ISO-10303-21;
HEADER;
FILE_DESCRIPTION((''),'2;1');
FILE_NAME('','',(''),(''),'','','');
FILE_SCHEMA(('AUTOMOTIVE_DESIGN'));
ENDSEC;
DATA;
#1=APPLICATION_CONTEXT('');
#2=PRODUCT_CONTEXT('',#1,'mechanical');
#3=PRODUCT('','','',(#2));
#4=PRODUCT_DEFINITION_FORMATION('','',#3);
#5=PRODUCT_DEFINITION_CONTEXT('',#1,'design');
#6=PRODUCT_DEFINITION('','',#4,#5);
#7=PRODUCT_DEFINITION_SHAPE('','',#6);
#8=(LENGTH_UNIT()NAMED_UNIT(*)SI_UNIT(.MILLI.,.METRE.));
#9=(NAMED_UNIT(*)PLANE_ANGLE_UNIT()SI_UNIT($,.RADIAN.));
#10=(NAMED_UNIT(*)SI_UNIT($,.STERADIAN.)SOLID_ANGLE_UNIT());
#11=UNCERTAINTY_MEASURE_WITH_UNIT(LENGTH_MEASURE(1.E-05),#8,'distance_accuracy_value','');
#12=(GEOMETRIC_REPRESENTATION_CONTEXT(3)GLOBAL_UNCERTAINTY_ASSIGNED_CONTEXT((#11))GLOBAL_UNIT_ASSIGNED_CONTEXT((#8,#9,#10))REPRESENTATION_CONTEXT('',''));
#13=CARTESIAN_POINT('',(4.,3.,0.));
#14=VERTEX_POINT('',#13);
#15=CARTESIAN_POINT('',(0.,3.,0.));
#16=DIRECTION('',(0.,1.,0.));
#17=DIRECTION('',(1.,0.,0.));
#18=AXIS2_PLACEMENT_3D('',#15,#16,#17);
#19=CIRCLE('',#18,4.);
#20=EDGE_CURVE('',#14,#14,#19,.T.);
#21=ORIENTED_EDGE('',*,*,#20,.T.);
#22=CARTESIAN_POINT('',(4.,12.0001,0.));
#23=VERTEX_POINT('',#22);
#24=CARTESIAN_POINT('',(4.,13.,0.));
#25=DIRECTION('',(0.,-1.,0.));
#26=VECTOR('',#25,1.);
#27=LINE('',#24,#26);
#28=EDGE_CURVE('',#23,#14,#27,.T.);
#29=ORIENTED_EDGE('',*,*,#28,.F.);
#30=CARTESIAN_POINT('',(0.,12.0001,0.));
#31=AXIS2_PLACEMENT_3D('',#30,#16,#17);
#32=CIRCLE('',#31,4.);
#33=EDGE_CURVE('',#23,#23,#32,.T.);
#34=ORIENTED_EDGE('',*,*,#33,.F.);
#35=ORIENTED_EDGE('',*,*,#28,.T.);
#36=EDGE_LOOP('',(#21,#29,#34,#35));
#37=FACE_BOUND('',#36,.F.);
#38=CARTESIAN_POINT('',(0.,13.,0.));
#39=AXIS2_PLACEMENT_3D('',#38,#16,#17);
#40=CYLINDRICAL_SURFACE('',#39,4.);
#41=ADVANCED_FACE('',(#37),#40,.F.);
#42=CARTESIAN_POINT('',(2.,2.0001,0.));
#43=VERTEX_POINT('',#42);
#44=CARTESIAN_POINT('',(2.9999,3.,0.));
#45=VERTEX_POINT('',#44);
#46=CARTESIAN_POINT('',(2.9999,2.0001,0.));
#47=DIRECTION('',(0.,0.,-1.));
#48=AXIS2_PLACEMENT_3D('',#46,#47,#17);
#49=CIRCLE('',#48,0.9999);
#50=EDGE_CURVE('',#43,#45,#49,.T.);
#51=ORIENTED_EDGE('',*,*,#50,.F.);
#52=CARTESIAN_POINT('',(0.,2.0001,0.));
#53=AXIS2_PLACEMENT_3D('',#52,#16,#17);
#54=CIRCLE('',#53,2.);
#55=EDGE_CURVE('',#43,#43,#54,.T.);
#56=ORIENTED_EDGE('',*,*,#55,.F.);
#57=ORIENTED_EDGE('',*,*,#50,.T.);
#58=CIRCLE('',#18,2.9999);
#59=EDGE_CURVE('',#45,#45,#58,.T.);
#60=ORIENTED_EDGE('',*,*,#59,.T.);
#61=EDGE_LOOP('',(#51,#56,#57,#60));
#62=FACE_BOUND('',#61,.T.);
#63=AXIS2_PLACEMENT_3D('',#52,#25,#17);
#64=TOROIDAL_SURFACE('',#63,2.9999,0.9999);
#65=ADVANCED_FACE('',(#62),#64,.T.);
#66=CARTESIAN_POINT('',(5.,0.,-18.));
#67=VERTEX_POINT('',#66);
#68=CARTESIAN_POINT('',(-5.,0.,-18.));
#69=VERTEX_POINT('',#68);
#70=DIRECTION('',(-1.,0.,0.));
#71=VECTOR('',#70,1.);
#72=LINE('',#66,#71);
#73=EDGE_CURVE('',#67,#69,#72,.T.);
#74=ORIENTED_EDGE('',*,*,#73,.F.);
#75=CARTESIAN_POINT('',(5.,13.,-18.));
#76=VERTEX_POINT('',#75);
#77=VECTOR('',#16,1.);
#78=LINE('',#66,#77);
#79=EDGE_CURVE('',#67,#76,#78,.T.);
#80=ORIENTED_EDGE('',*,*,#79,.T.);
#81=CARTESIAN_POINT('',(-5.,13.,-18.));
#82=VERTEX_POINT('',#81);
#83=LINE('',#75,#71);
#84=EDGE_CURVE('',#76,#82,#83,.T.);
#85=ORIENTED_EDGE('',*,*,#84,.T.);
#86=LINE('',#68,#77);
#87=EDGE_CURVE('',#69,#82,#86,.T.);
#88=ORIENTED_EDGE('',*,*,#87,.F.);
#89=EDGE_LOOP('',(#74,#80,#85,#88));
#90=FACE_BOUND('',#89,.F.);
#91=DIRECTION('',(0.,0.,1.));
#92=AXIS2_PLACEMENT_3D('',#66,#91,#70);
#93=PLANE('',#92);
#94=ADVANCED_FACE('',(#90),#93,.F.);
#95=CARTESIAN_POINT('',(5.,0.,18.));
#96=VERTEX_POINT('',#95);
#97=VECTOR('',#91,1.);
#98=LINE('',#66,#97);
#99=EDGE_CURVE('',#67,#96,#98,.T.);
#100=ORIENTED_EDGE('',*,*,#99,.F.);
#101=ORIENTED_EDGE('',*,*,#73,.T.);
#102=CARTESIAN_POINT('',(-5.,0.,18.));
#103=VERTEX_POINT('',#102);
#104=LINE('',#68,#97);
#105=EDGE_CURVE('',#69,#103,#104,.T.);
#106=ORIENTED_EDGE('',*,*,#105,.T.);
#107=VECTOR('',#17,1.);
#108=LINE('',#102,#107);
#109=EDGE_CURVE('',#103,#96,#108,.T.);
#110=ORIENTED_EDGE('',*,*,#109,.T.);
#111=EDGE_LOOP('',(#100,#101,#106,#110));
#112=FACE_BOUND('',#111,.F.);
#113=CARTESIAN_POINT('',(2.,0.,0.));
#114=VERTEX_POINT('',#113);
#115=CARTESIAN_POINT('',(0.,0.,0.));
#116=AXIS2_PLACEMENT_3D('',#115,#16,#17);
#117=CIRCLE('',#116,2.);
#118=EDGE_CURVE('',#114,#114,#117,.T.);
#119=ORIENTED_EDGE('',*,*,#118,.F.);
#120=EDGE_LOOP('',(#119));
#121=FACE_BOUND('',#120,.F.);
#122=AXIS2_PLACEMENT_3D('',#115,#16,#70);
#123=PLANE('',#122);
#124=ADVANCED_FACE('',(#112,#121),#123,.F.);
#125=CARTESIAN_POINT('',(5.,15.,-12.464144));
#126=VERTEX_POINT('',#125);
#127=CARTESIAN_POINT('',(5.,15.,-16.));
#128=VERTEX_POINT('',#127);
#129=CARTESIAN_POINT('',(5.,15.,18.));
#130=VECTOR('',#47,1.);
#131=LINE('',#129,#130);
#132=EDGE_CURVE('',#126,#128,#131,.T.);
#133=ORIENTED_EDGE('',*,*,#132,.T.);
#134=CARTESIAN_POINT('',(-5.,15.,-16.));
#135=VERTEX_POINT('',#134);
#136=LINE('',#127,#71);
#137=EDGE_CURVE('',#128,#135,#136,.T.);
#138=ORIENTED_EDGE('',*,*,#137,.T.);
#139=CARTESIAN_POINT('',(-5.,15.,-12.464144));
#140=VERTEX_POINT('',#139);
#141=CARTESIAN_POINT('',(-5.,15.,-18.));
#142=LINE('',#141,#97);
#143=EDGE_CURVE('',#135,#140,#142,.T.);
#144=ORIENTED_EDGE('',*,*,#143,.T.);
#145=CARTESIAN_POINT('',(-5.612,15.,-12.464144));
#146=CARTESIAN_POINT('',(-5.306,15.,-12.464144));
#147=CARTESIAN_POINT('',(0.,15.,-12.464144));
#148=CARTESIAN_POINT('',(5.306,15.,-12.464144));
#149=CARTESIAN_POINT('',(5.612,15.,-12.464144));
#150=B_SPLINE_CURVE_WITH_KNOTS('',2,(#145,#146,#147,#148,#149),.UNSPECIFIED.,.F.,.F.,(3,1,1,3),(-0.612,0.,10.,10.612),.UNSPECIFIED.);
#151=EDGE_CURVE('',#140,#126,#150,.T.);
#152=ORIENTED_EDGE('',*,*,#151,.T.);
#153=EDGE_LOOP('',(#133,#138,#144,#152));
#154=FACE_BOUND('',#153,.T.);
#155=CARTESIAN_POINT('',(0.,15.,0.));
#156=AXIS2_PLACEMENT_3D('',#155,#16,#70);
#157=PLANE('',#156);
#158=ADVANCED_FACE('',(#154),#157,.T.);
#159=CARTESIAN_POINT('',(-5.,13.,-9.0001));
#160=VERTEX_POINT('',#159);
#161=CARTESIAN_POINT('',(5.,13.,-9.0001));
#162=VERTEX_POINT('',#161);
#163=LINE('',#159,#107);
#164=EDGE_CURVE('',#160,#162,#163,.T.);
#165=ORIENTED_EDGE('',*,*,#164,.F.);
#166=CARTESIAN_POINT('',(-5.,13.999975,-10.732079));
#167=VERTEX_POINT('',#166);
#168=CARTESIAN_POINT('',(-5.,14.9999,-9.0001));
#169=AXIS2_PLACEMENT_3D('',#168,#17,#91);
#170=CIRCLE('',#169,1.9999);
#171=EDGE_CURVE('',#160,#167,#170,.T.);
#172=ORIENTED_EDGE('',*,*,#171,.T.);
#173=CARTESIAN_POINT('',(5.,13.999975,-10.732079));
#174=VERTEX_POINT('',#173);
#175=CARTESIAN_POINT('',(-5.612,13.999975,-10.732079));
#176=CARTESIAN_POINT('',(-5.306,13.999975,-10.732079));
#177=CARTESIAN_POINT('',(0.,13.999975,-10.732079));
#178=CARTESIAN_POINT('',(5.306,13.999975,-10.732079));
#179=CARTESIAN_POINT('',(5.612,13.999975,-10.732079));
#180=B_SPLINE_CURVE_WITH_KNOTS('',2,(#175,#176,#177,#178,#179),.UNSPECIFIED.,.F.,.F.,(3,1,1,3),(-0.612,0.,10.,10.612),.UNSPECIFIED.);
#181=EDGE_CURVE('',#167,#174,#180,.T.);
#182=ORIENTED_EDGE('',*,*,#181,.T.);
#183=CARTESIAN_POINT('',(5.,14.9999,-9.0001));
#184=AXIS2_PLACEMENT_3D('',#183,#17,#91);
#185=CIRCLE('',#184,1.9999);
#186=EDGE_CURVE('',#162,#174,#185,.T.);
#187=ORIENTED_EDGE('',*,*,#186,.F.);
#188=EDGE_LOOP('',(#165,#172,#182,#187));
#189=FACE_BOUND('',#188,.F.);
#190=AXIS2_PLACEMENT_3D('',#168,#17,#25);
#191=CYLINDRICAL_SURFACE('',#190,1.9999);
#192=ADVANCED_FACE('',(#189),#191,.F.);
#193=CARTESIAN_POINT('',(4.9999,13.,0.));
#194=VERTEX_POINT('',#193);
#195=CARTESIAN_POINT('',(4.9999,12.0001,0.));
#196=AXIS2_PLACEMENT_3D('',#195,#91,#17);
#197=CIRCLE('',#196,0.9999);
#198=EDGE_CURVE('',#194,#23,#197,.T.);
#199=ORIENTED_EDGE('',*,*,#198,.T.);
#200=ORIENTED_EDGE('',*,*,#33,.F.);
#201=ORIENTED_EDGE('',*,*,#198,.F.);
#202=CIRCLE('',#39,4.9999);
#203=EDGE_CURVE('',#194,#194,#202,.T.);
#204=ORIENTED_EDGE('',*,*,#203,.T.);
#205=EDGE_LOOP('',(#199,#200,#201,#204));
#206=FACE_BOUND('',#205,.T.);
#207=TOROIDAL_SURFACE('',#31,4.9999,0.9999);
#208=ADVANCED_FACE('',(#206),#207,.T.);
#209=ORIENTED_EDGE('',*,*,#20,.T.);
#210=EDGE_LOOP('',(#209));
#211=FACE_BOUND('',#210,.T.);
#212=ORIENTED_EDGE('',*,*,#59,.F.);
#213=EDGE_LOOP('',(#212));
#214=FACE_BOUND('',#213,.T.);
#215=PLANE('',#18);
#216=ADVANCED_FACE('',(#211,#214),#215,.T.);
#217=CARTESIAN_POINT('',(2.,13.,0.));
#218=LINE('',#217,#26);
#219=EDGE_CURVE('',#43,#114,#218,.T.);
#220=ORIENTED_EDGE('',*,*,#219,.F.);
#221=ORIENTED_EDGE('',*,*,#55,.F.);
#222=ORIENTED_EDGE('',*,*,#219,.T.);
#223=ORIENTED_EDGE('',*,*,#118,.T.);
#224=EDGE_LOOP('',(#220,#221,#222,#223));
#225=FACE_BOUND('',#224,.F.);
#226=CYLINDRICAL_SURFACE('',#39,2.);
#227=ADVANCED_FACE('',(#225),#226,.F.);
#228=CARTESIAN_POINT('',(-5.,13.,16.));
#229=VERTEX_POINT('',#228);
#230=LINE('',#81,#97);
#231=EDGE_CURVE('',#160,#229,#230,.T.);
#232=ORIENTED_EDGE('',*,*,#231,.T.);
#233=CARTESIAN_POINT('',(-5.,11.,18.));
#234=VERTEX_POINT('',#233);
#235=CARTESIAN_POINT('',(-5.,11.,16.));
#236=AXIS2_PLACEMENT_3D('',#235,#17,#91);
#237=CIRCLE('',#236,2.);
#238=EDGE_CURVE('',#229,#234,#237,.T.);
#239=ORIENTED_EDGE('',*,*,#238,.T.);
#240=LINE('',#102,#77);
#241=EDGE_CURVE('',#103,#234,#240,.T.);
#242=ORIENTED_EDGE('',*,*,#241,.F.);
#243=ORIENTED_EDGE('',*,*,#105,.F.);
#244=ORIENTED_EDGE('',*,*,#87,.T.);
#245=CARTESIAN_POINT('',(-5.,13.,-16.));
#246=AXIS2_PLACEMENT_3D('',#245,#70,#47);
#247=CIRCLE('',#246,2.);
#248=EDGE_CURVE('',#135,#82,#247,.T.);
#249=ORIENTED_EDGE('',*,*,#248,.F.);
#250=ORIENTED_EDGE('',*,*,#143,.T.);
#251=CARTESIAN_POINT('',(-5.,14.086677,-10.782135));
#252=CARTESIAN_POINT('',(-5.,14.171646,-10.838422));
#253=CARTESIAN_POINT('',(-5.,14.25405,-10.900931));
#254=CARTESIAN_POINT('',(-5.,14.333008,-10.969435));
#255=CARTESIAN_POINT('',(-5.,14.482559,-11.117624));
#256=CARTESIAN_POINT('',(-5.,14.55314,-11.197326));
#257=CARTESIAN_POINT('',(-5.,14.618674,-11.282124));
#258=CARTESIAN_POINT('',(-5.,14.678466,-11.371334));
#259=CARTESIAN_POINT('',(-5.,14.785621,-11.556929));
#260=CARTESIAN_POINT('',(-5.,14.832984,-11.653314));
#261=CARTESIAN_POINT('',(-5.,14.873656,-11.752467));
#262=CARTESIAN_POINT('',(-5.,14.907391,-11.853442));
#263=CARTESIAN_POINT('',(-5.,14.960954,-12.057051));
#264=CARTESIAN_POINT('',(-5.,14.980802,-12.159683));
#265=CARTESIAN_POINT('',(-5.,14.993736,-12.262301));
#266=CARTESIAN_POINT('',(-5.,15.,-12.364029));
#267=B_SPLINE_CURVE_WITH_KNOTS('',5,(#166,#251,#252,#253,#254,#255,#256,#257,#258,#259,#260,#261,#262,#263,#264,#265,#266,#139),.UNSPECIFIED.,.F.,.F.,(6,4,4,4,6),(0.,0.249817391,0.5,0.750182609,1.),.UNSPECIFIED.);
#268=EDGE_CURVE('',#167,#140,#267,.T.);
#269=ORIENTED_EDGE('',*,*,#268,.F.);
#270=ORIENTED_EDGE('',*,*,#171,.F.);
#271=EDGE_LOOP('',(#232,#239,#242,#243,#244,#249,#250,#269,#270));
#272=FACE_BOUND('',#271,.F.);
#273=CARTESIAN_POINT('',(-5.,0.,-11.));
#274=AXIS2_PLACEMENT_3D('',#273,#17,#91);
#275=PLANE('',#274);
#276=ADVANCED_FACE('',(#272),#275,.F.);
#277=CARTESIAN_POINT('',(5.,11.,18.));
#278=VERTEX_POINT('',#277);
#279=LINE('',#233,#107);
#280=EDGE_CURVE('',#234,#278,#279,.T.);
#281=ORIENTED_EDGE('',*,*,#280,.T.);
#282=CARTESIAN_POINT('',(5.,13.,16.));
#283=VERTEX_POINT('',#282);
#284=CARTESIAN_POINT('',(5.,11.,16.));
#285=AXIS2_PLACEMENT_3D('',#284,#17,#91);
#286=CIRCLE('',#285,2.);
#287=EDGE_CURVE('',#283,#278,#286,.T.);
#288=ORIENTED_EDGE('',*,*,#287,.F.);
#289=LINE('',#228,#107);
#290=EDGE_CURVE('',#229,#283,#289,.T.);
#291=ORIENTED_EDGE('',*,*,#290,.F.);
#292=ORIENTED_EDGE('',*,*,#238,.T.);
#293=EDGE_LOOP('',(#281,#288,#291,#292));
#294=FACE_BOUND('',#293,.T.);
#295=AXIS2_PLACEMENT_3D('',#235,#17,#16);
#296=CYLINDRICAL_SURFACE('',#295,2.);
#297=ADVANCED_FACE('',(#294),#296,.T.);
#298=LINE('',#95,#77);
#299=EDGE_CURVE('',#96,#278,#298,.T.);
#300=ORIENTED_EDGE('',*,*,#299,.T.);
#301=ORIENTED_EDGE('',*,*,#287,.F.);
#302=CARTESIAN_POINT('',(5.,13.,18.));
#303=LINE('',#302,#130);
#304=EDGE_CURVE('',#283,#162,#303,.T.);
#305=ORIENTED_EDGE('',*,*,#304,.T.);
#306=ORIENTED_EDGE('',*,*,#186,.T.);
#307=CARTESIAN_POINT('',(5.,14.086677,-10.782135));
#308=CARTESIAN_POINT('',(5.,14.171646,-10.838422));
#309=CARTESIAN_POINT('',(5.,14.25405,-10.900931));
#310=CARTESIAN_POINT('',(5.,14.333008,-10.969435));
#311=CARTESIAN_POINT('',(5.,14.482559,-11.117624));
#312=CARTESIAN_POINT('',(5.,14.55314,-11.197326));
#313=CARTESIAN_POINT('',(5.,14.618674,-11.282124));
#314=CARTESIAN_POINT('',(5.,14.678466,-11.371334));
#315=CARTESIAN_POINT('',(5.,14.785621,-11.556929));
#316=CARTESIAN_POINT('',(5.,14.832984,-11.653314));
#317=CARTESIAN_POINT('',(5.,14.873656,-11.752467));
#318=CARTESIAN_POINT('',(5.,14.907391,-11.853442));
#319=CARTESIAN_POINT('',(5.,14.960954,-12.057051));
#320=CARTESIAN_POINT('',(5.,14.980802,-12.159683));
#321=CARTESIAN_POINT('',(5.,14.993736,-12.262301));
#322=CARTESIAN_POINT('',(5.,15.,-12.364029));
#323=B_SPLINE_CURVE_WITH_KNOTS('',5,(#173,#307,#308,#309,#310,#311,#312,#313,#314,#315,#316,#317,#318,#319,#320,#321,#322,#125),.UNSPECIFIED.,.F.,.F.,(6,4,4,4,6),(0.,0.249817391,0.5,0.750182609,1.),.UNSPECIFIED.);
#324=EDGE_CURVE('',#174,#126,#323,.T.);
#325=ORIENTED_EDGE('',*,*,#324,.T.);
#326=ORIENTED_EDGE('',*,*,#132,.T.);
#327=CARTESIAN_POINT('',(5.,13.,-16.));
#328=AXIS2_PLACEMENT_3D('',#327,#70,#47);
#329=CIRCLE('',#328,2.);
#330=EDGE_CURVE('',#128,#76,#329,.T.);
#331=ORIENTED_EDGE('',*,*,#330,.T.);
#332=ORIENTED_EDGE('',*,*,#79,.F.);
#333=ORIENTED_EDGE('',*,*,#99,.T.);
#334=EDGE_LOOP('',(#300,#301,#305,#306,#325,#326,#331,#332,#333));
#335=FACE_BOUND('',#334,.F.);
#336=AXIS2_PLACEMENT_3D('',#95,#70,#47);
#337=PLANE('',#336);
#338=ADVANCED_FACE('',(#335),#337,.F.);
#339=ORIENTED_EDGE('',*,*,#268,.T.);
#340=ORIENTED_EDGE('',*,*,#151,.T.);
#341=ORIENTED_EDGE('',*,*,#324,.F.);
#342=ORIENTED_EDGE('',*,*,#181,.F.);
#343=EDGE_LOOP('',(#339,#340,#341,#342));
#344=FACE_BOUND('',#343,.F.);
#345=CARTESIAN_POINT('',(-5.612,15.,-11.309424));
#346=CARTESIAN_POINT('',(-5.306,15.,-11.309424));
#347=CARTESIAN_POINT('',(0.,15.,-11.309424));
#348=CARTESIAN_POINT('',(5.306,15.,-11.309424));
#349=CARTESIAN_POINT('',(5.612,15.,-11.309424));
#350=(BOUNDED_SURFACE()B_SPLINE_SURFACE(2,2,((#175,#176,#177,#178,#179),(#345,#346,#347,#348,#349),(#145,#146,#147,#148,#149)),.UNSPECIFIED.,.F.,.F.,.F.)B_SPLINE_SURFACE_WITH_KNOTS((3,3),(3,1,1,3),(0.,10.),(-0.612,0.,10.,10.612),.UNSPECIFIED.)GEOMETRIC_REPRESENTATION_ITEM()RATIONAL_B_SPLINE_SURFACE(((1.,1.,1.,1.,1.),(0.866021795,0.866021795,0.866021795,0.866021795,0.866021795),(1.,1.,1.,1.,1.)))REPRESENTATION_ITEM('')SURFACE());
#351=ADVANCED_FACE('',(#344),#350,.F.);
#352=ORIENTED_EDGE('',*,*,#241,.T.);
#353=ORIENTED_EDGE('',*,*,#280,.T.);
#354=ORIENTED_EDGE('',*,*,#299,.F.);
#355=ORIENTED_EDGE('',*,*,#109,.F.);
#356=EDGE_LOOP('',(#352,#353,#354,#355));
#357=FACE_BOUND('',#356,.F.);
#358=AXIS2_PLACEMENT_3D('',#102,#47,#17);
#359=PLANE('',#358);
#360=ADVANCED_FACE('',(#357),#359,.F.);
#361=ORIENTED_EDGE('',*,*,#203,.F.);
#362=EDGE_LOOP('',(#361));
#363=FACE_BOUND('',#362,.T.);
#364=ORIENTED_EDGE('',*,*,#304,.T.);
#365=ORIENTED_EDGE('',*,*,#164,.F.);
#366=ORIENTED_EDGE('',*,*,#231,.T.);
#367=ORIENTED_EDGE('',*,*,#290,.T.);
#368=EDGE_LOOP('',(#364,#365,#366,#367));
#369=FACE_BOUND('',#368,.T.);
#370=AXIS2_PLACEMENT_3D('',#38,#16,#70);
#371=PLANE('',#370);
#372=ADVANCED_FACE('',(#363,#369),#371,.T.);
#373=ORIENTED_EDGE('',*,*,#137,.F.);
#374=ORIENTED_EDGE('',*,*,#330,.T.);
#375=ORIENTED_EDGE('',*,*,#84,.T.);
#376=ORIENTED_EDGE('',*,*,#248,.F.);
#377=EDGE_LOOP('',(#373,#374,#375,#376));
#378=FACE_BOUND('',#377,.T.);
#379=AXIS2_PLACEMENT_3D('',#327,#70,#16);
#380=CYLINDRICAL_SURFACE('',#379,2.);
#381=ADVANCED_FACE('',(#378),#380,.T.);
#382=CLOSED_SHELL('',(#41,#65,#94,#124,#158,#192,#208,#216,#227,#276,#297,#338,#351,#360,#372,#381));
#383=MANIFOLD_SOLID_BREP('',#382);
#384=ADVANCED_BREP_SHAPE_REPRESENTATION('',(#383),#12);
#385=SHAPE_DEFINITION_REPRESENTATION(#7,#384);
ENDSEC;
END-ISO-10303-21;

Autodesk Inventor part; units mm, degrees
ref_plane "YZ Plane" through (0, 0, 0) normal (1, 0, 0) x (0, 1, 0)
ref_plane "XZ Plane" through (0, 0, 0) normal (0, 1, 0) x (-1, 0, 0)
ref_plane "XY Plane" through (0, 0, 0) normal (0, 0, 1) x (1, 0, 0)
sketch "Sketch1" plane through (0, 0, 0) normal (0, 1, 0) x (-1, 0, 0)
  line L0 (5, 18) -> (-5, 18)
  line L1 (-5, 18) -> (-5, -18)
  line L2 (-5, -18) -> (5, -18)
  line L3 (5, -18) -> (5, 18)
  line L4 (5, 18) -> (-5, -18) construction
  line L5 (-5, 18) -> (5, -18) construction
  line L6 (5, -18) -> (5, -11)
  line L7 (5, -11) -> (-5, -11)
  point P0 (0, 0)
  dimension "d0" = 10
  dimension "d1" = 36
  dimension "d2" = 7
extrude "Extrusion1" add sketch "Sketch1" along normal blind 13 contours L3 L7 L1 L0
extrude "Extrusion2" add sketch "Sketch1" along normal blind 15 contours L3 L2 L1 L7
fillet "Fillet1" radius 2 4 edges at (0, 15, -11) (0, 13, -11) (0, 15, -18) (0, 13, 18)
sketch "Sketch2" plane through (0, 13, 0) normal (0, 1, 0) x (1, 0, 0)
  circle A0 centre (0, 0) radius 4
  circle A1 centre (0, 0) radius 2
  dimension "d8" = 8
  dimension "d9" = 4
extrude "Extrusion3" cut sketch "Sketch2" against normal blind 15 contours A1
extrude "Extrusion4" cut sketch "Sketch2" against normal blind 10
fillet "Fillet2" radius 1 2 edges at (-2, 3, 0) (-4, 13, 0)
properties part number "offset_vacuumbox"
